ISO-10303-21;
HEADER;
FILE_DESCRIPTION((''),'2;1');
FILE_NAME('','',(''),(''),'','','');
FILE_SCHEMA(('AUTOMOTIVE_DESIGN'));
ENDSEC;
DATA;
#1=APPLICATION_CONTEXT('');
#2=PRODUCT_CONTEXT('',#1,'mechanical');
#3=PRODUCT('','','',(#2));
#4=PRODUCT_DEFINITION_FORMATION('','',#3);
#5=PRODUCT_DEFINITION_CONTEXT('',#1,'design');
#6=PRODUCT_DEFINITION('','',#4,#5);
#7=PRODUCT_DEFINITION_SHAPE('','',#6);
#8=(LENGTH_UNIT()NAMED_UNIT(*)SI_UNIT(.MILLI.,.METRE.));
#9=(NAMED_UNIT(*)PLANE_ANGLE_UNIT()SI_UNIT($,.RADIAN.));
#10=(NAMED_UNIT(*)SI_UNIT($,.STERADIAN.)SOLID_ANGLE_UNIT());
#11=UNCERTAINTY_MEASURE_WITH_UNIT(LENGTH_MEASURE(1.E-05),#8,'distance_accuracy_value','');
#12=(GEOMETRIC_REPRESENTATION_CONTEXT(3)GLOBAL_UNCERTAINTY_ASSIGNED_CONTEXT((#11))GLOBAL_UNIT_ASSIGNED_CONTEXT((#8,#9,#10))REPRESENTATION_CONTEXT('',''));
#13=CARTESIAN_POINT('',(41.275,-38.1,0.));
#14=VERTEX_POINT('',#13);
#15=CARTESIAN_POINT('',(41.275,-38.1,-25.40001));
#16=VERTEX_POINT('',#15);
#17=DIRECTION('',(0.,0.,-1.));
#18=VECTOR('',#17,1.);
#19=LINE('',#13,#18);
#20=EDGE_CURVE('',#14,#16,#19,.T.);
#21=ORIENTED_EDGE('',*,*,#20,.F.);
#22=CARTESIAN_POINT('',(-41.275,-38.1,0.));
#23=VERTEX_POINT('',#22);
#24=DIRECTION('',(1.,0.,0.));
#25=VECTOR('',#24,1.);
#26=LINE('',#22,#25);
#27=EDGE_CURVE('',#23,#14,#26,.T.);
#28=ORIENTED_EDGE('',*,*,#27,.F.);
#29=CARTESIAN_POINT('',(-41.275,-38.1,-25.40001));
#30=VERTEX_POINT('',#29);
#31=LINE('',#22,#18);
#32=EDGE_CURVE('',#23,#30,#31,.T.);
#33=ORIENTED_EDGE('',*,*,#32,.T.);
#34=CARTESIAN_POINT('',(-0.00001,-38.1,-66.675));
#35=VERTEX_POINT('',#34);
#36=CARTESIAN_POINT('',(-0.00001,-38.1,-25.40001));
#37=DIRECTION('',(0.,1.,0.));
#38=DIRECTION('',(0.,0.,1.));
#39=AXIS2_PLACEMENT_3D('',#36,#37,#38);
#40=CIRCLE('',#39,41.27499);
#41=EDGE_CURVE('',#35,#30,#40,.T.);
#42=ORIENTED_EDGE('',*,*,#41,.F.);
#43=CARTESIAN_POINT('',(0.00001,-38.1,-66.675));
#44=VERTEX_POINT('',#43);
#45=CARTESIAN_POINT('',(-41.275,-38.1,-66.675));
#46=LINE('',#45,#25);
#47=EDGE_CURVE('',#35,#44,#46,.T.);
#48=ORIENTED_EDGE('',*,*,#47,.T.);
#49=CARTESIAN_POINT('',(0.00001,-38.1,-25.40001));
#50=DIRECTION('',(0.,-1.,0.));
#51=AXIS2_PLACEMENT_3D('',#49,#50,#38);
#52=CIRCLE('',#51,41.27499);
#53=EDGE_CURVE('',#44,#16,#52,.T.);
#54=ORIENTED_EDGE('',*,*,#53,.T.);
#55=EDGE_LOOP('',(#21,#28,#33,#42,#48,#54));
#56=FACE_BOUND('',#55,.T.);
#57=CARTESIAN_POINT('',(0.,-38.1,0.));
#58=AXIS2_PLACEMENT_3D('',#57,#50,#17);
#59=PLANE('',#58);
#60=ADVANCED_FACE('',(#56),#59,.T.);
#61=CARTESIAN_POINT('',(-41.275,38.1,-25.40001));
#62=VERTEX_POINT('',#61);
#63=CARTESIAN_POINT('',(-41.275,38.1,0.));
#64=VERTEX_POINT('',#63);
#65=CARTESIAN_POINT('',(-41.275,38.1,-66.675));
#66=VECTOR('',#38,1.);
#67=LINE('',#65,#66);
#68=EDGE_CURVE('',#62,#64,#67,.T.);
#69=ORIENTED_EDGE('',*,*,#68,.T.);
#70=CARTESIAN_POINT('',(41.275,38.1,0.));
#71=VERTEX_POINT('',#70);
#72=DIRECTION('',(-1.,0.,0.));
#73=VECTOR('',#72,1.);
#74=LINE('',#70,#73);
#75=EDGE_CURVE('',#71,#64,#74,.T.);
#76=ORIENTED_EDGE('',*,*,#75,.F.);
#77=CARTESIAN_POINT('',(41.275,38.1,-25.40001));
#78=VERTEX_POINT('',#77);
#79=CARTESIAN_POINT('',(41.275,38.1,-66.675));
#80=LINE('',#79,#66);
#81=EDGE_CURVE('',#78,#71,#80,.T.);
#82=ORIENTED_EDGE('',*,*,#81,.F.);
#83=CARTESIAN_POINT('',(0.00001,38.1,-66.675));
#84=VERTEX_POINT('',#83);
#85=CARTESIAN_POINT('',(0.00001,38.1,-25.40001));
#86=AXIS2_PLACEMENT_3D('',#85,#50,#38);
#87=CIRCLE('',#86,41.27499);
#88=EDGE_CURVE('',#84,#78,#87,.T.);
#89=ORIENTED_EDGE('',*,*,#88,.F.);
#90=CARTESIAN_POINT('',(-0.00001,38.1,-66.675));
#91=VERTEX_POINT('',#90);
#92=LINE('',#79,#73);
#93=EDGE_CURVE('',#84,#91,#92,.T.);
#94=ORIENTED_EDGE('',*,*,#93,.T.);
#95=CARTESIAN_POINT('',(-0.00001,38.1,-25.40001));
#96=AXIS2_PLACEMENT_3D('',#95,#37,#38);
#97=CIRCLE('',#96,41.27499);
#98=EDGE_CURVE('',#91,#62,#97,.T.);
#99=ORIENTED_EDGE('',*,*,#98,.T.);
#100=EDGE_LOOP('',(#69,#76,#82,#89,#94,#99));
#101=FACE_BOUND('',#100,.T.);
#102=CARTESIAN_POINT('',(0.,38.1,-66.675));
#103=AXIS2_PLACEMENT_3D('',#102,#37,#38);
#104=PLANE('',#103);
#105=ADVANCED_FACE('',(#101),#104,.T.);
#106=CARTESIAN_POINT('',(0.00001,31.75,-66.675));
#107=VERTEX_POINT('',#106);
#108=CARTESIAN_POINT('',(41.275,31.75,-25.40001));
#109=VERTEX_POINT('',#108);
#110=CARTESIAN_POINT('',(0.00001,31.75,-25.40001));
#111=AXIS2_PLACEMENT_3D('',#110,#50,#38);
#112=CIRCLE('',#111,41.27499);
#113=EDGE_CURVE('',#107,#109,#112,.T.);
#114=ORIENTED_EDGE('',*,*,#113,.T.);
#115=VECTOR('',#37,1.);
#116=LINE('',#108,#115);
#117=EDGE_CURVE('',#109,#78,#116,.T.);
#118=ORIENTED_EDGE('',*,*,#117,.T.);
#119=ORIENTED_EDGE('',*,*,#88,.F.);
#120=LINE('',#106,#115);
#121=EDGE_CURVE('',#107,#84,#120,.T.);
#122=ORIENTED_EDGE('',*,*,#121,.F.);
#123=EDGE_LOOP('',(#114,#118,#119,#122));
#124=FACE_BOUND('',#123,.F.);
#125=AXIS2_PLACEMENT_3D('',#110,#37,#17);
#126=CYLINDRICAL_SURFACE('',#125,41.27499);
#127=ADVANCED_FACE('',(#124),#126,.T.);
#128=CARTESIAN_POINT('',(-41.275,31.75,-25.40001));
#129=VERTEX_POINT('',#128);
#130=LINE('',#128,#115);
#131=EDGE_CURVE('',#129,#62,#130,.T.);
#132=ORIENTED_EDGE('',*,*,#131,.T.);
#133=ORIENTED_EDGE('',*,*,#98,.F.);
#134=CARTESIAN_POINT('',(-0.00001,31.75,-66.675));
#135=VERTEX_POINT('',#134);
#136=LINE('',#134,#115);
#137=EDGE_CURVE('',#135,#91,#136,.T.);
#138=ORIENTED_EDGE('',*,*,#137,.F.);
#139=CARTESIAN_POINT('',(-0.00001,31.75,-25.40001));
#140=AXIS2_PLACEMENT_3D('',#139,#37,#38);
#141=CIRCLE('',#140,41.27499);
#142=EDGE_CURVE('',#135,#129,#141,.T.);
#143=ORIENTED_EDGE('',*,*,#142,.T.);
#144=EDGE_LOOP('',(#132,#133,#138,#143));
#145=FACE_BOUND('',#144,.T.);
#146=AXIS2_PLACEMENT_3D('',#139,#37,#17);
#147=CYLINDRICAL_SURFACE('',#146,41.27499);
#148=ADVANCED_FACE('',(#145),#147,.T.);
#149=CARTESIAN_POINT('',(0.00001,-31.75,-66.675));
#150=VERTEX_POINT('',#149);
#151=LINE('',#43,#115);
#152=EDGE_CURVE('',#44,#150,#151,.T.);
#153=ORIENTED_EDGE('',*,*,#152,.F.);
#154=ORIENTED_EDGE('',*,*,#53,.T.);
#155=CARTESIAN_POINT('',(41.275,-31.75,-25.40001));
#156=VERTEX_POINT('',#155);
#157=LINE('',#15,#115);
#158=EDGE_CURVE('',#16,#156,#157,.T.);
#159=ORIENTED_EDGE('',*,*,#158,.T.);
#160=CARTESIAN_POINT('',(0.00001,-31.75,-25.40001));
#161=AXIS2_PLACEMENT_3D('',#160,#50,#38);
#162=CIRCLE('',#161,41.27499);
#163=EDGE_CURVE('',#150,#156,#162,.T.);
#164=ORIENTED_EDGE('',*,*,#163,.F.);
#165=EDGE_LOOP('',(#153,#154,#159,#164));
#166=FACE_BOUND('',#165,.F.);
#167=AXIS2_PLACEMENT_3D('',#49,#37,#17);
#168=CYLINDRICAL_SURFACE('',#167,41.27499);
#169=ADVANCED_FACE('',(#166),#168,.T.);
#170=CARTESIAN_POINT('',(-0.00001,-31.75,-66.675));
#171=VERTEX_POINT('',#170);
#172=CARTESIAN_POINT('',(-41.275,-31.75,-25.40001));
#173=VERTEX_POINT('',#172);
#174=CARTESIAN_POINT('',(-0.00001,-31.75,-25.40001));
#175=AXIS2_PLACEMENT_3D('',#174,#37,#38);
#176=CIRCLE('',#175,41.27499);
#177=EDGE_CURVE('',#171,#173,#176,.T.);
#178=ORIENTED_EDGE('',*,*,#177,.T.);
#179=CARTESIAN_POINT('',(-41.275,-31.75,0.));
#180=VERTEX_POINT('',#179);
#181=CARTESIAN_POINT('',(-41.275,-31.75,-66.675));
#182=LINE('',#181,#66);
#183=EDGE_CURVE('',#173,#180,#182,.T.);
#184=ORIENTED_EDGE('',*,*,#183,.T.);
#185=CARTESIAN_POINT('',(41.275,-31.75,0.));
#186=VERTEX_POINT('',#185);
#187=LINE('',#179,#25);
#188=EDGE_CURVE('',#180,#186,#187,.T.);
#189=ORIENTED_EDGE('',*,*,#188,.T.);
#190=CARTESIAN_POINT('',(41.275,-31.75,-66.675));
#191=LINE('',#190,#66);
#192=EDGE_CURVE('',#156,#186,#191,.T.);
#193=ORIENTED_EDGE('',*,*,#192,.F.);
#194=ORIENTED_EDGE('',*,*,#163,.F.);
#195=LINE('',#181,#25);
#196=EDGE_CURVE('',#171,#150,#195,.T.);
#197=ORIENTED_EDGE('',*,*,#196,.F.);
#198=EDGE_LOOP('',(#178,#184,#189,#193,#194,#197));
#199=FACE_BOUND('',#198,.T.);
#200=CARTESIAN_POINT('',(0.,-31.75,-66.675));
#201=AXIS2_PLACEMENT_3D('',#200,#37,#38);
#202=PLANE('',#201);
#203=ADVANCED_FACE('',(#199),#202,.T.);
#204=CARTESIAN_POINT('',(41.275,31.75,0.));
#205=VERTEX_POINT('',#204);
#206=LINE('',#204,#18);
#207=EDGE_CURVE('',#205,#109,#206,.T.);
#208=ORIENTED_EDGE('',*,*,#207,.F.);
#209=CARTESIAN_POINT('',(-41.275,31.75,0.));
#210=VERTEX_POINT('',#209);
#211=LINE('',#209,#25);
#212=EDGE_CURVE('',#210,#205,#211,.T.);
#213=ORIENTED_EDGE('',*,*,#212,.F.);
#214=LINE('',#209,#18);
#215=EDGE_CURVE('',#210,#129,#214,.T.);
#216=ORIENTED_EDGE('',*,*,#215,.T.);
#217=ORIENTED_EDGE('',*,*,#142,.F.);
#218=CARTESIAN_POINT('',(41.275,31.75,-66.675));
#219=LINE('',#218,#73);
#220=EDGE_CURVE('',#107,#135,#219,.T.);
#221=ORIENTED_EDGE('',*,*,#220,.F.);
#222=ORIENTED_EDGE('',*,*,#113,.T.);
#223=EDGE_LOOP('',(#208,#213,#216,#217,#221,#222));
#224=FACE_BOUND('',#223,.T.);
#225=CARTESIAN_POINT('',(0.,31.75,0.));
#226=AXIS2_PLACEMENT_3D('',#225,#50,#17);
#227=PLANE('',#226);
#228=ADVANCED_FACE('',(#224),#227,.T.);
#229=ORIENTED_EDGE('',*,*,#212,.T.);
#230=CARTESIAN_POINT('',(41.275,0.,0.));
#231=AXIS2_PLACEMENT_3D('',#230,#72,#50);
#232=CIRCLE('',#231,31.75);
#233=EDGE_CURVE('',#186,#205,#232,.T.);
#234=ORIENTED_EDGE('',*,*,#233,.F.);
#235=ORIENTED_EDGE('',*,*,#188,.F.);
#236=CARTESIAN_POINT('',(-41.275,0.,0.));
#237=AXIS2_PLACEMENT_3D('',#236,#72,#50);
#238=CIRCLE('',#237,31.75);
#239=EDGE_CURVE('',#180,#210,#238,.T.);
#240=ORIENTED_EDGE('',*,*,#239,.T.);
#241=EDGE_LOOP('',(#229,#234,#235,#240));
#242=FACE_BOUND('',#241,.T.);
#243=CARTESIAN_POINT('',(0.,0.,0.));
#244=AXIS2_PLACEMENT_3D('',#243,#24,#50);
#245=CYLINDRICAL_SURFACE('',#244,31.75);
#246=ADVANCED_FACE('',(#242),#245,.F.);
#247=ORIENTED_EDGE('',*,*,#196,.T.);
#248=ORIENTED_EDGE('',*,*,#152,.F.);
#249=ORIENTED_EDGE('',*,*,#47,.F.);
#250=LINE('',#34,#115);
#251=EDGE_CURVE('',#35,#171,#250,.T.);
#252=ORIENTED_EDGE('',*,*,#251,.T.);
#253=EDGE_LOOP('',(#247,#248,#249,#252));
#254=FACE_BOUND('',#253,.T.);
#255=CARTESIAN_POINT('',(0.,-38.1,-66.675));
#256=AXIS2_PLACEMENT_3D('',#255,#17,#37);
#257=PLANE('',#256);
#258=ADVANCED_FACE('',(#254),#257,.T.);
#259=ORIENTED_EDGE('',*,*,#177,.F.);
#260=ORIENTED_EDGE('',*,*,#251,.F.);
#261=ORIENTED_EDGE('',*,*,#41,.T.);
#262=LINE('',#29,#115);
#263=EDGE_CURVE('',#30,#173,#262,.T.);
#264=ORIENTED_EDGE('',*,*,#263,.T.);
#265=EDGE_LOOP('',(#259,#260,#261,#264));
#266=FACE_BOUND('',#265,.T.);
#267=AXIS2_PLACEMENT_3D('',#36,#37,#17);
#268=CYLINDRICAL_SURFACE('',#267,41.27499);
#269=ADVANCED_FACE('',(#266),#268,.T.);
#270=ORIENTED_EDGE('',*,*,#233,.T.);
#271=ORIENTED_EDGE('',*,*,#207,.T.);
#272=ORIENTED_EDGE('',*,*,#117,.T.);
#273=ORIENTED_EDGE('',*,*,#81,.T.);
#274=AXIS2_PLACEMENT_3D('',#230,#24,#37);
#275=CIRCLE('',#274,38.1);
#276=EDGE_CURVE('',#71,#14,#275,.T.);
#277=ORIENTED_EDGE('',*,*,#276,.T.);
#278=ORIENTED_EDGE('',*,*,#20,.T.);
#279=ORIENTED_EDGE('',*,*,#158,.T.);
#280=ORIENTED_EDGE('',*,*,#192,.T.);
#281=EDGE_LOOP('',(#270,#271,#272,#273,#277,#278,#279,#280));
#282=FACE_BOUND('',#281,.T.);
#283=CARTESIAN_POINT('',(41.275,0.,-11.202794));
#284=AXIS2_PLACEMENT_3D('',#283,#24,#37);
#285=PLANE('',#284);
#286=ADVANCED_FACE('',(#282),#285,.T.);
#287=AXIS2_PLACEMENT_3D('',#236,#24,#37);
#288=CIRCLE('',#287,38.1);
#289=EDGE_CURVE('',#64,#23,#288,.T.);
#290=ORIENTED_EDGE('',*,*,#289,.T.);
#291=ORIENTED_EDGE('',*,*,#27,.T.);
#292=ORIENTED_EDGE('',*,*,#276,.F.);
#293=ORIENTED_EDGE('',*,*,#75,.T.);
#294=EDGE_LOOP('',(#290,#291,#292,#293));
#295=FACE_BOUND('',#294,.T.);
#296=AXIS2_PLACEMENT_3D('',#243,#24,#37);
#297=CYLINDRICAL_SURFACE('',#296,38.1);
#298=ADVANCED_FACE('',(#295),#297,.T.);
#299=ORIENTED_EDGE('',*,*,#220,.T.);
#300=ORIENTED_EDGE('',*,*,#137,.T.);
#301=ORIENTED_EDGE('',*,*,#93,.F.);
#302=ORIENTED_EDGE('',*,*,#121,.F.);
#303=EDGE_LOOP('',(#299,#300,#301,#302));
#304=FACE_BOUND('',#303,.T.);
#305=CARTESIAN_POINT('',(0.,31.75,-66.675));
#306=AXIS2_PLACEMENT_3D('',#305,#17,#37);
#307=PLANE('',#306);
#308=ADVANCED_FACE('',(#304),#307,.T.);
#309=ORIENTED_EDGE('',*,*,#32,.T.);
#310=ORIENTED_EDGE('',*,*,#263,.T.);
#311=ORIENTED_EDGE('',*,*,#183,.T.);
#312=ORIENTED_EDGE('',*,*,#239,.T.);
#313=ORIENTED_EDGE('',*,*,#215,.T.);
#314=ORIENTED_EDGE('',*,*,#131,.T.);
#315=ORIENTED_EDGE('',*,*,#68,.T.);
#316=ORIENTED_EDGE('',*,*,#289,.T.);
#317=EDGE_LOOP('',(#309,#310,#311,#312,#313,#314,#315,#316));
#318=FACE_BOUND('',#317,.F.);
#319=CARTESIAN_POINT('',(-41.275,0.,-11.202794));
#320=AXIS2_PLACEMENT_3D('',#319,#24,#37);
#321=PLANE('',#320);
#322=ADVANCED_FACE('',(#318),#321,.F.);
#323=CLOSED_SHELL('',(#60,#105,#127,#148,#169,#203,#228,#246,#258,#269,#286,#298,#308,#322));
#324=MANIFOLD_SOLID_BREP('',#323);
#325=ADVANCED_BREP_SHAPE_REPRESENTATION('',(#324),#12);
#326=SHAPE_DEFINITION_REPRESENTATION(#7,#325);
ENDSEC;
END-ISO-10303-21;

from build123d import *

# Parameters (mm, degrees)
F1_DEPTH = 41.275
F2_R     = 41.27499


# Not quite as in the source:
# - a fillet or chamfer is up to 0.001 mm smaller than in the source, because OpenCascade refuses the exact size


with BuildPart() as f1:
    # F0 (on Right) → F1 (new body, symmetric)
    with BuildSketch(Plane.YZ):
        with BuildLine():
            ThreePointArc((38.1, 0), (0, 38.1), (-38.1, 0))
            Line((-38.1, 0), (-38.1, -66.675))
            Line((-38.1, -66.675), (-31.75, -66.675))
            Line((-31.75, -66.675), (-31.75, 0))
            ThreePointArc((-31.75, 0), (0, 31.75), (31.75, 0))
            Line((31.75, 0), (31.75, -66.675))
            Line((31.75, -66.675), (38.1, -66.675))
            Line((38.1, -66.675), (38.1, 0))
        make_face()
    extrude(amount=F1_DEPTH, both=True)

    # F2 (radius 41.275 in the source; OpenCascade refuses exactly that, so slightly less here)
    f2_edges = [f1.edges().sort_by_distance(p)[0] for p in [
        (-41.275, 34.925, -66.675),
        (-41.275, -34.925, -66.675),
        (41.275, -34.925, -66.675),
        (41.275, 34.925, -66.675),
    ]]
    fillet(f2_edges, radius=F2_R)


solid = f1.part
